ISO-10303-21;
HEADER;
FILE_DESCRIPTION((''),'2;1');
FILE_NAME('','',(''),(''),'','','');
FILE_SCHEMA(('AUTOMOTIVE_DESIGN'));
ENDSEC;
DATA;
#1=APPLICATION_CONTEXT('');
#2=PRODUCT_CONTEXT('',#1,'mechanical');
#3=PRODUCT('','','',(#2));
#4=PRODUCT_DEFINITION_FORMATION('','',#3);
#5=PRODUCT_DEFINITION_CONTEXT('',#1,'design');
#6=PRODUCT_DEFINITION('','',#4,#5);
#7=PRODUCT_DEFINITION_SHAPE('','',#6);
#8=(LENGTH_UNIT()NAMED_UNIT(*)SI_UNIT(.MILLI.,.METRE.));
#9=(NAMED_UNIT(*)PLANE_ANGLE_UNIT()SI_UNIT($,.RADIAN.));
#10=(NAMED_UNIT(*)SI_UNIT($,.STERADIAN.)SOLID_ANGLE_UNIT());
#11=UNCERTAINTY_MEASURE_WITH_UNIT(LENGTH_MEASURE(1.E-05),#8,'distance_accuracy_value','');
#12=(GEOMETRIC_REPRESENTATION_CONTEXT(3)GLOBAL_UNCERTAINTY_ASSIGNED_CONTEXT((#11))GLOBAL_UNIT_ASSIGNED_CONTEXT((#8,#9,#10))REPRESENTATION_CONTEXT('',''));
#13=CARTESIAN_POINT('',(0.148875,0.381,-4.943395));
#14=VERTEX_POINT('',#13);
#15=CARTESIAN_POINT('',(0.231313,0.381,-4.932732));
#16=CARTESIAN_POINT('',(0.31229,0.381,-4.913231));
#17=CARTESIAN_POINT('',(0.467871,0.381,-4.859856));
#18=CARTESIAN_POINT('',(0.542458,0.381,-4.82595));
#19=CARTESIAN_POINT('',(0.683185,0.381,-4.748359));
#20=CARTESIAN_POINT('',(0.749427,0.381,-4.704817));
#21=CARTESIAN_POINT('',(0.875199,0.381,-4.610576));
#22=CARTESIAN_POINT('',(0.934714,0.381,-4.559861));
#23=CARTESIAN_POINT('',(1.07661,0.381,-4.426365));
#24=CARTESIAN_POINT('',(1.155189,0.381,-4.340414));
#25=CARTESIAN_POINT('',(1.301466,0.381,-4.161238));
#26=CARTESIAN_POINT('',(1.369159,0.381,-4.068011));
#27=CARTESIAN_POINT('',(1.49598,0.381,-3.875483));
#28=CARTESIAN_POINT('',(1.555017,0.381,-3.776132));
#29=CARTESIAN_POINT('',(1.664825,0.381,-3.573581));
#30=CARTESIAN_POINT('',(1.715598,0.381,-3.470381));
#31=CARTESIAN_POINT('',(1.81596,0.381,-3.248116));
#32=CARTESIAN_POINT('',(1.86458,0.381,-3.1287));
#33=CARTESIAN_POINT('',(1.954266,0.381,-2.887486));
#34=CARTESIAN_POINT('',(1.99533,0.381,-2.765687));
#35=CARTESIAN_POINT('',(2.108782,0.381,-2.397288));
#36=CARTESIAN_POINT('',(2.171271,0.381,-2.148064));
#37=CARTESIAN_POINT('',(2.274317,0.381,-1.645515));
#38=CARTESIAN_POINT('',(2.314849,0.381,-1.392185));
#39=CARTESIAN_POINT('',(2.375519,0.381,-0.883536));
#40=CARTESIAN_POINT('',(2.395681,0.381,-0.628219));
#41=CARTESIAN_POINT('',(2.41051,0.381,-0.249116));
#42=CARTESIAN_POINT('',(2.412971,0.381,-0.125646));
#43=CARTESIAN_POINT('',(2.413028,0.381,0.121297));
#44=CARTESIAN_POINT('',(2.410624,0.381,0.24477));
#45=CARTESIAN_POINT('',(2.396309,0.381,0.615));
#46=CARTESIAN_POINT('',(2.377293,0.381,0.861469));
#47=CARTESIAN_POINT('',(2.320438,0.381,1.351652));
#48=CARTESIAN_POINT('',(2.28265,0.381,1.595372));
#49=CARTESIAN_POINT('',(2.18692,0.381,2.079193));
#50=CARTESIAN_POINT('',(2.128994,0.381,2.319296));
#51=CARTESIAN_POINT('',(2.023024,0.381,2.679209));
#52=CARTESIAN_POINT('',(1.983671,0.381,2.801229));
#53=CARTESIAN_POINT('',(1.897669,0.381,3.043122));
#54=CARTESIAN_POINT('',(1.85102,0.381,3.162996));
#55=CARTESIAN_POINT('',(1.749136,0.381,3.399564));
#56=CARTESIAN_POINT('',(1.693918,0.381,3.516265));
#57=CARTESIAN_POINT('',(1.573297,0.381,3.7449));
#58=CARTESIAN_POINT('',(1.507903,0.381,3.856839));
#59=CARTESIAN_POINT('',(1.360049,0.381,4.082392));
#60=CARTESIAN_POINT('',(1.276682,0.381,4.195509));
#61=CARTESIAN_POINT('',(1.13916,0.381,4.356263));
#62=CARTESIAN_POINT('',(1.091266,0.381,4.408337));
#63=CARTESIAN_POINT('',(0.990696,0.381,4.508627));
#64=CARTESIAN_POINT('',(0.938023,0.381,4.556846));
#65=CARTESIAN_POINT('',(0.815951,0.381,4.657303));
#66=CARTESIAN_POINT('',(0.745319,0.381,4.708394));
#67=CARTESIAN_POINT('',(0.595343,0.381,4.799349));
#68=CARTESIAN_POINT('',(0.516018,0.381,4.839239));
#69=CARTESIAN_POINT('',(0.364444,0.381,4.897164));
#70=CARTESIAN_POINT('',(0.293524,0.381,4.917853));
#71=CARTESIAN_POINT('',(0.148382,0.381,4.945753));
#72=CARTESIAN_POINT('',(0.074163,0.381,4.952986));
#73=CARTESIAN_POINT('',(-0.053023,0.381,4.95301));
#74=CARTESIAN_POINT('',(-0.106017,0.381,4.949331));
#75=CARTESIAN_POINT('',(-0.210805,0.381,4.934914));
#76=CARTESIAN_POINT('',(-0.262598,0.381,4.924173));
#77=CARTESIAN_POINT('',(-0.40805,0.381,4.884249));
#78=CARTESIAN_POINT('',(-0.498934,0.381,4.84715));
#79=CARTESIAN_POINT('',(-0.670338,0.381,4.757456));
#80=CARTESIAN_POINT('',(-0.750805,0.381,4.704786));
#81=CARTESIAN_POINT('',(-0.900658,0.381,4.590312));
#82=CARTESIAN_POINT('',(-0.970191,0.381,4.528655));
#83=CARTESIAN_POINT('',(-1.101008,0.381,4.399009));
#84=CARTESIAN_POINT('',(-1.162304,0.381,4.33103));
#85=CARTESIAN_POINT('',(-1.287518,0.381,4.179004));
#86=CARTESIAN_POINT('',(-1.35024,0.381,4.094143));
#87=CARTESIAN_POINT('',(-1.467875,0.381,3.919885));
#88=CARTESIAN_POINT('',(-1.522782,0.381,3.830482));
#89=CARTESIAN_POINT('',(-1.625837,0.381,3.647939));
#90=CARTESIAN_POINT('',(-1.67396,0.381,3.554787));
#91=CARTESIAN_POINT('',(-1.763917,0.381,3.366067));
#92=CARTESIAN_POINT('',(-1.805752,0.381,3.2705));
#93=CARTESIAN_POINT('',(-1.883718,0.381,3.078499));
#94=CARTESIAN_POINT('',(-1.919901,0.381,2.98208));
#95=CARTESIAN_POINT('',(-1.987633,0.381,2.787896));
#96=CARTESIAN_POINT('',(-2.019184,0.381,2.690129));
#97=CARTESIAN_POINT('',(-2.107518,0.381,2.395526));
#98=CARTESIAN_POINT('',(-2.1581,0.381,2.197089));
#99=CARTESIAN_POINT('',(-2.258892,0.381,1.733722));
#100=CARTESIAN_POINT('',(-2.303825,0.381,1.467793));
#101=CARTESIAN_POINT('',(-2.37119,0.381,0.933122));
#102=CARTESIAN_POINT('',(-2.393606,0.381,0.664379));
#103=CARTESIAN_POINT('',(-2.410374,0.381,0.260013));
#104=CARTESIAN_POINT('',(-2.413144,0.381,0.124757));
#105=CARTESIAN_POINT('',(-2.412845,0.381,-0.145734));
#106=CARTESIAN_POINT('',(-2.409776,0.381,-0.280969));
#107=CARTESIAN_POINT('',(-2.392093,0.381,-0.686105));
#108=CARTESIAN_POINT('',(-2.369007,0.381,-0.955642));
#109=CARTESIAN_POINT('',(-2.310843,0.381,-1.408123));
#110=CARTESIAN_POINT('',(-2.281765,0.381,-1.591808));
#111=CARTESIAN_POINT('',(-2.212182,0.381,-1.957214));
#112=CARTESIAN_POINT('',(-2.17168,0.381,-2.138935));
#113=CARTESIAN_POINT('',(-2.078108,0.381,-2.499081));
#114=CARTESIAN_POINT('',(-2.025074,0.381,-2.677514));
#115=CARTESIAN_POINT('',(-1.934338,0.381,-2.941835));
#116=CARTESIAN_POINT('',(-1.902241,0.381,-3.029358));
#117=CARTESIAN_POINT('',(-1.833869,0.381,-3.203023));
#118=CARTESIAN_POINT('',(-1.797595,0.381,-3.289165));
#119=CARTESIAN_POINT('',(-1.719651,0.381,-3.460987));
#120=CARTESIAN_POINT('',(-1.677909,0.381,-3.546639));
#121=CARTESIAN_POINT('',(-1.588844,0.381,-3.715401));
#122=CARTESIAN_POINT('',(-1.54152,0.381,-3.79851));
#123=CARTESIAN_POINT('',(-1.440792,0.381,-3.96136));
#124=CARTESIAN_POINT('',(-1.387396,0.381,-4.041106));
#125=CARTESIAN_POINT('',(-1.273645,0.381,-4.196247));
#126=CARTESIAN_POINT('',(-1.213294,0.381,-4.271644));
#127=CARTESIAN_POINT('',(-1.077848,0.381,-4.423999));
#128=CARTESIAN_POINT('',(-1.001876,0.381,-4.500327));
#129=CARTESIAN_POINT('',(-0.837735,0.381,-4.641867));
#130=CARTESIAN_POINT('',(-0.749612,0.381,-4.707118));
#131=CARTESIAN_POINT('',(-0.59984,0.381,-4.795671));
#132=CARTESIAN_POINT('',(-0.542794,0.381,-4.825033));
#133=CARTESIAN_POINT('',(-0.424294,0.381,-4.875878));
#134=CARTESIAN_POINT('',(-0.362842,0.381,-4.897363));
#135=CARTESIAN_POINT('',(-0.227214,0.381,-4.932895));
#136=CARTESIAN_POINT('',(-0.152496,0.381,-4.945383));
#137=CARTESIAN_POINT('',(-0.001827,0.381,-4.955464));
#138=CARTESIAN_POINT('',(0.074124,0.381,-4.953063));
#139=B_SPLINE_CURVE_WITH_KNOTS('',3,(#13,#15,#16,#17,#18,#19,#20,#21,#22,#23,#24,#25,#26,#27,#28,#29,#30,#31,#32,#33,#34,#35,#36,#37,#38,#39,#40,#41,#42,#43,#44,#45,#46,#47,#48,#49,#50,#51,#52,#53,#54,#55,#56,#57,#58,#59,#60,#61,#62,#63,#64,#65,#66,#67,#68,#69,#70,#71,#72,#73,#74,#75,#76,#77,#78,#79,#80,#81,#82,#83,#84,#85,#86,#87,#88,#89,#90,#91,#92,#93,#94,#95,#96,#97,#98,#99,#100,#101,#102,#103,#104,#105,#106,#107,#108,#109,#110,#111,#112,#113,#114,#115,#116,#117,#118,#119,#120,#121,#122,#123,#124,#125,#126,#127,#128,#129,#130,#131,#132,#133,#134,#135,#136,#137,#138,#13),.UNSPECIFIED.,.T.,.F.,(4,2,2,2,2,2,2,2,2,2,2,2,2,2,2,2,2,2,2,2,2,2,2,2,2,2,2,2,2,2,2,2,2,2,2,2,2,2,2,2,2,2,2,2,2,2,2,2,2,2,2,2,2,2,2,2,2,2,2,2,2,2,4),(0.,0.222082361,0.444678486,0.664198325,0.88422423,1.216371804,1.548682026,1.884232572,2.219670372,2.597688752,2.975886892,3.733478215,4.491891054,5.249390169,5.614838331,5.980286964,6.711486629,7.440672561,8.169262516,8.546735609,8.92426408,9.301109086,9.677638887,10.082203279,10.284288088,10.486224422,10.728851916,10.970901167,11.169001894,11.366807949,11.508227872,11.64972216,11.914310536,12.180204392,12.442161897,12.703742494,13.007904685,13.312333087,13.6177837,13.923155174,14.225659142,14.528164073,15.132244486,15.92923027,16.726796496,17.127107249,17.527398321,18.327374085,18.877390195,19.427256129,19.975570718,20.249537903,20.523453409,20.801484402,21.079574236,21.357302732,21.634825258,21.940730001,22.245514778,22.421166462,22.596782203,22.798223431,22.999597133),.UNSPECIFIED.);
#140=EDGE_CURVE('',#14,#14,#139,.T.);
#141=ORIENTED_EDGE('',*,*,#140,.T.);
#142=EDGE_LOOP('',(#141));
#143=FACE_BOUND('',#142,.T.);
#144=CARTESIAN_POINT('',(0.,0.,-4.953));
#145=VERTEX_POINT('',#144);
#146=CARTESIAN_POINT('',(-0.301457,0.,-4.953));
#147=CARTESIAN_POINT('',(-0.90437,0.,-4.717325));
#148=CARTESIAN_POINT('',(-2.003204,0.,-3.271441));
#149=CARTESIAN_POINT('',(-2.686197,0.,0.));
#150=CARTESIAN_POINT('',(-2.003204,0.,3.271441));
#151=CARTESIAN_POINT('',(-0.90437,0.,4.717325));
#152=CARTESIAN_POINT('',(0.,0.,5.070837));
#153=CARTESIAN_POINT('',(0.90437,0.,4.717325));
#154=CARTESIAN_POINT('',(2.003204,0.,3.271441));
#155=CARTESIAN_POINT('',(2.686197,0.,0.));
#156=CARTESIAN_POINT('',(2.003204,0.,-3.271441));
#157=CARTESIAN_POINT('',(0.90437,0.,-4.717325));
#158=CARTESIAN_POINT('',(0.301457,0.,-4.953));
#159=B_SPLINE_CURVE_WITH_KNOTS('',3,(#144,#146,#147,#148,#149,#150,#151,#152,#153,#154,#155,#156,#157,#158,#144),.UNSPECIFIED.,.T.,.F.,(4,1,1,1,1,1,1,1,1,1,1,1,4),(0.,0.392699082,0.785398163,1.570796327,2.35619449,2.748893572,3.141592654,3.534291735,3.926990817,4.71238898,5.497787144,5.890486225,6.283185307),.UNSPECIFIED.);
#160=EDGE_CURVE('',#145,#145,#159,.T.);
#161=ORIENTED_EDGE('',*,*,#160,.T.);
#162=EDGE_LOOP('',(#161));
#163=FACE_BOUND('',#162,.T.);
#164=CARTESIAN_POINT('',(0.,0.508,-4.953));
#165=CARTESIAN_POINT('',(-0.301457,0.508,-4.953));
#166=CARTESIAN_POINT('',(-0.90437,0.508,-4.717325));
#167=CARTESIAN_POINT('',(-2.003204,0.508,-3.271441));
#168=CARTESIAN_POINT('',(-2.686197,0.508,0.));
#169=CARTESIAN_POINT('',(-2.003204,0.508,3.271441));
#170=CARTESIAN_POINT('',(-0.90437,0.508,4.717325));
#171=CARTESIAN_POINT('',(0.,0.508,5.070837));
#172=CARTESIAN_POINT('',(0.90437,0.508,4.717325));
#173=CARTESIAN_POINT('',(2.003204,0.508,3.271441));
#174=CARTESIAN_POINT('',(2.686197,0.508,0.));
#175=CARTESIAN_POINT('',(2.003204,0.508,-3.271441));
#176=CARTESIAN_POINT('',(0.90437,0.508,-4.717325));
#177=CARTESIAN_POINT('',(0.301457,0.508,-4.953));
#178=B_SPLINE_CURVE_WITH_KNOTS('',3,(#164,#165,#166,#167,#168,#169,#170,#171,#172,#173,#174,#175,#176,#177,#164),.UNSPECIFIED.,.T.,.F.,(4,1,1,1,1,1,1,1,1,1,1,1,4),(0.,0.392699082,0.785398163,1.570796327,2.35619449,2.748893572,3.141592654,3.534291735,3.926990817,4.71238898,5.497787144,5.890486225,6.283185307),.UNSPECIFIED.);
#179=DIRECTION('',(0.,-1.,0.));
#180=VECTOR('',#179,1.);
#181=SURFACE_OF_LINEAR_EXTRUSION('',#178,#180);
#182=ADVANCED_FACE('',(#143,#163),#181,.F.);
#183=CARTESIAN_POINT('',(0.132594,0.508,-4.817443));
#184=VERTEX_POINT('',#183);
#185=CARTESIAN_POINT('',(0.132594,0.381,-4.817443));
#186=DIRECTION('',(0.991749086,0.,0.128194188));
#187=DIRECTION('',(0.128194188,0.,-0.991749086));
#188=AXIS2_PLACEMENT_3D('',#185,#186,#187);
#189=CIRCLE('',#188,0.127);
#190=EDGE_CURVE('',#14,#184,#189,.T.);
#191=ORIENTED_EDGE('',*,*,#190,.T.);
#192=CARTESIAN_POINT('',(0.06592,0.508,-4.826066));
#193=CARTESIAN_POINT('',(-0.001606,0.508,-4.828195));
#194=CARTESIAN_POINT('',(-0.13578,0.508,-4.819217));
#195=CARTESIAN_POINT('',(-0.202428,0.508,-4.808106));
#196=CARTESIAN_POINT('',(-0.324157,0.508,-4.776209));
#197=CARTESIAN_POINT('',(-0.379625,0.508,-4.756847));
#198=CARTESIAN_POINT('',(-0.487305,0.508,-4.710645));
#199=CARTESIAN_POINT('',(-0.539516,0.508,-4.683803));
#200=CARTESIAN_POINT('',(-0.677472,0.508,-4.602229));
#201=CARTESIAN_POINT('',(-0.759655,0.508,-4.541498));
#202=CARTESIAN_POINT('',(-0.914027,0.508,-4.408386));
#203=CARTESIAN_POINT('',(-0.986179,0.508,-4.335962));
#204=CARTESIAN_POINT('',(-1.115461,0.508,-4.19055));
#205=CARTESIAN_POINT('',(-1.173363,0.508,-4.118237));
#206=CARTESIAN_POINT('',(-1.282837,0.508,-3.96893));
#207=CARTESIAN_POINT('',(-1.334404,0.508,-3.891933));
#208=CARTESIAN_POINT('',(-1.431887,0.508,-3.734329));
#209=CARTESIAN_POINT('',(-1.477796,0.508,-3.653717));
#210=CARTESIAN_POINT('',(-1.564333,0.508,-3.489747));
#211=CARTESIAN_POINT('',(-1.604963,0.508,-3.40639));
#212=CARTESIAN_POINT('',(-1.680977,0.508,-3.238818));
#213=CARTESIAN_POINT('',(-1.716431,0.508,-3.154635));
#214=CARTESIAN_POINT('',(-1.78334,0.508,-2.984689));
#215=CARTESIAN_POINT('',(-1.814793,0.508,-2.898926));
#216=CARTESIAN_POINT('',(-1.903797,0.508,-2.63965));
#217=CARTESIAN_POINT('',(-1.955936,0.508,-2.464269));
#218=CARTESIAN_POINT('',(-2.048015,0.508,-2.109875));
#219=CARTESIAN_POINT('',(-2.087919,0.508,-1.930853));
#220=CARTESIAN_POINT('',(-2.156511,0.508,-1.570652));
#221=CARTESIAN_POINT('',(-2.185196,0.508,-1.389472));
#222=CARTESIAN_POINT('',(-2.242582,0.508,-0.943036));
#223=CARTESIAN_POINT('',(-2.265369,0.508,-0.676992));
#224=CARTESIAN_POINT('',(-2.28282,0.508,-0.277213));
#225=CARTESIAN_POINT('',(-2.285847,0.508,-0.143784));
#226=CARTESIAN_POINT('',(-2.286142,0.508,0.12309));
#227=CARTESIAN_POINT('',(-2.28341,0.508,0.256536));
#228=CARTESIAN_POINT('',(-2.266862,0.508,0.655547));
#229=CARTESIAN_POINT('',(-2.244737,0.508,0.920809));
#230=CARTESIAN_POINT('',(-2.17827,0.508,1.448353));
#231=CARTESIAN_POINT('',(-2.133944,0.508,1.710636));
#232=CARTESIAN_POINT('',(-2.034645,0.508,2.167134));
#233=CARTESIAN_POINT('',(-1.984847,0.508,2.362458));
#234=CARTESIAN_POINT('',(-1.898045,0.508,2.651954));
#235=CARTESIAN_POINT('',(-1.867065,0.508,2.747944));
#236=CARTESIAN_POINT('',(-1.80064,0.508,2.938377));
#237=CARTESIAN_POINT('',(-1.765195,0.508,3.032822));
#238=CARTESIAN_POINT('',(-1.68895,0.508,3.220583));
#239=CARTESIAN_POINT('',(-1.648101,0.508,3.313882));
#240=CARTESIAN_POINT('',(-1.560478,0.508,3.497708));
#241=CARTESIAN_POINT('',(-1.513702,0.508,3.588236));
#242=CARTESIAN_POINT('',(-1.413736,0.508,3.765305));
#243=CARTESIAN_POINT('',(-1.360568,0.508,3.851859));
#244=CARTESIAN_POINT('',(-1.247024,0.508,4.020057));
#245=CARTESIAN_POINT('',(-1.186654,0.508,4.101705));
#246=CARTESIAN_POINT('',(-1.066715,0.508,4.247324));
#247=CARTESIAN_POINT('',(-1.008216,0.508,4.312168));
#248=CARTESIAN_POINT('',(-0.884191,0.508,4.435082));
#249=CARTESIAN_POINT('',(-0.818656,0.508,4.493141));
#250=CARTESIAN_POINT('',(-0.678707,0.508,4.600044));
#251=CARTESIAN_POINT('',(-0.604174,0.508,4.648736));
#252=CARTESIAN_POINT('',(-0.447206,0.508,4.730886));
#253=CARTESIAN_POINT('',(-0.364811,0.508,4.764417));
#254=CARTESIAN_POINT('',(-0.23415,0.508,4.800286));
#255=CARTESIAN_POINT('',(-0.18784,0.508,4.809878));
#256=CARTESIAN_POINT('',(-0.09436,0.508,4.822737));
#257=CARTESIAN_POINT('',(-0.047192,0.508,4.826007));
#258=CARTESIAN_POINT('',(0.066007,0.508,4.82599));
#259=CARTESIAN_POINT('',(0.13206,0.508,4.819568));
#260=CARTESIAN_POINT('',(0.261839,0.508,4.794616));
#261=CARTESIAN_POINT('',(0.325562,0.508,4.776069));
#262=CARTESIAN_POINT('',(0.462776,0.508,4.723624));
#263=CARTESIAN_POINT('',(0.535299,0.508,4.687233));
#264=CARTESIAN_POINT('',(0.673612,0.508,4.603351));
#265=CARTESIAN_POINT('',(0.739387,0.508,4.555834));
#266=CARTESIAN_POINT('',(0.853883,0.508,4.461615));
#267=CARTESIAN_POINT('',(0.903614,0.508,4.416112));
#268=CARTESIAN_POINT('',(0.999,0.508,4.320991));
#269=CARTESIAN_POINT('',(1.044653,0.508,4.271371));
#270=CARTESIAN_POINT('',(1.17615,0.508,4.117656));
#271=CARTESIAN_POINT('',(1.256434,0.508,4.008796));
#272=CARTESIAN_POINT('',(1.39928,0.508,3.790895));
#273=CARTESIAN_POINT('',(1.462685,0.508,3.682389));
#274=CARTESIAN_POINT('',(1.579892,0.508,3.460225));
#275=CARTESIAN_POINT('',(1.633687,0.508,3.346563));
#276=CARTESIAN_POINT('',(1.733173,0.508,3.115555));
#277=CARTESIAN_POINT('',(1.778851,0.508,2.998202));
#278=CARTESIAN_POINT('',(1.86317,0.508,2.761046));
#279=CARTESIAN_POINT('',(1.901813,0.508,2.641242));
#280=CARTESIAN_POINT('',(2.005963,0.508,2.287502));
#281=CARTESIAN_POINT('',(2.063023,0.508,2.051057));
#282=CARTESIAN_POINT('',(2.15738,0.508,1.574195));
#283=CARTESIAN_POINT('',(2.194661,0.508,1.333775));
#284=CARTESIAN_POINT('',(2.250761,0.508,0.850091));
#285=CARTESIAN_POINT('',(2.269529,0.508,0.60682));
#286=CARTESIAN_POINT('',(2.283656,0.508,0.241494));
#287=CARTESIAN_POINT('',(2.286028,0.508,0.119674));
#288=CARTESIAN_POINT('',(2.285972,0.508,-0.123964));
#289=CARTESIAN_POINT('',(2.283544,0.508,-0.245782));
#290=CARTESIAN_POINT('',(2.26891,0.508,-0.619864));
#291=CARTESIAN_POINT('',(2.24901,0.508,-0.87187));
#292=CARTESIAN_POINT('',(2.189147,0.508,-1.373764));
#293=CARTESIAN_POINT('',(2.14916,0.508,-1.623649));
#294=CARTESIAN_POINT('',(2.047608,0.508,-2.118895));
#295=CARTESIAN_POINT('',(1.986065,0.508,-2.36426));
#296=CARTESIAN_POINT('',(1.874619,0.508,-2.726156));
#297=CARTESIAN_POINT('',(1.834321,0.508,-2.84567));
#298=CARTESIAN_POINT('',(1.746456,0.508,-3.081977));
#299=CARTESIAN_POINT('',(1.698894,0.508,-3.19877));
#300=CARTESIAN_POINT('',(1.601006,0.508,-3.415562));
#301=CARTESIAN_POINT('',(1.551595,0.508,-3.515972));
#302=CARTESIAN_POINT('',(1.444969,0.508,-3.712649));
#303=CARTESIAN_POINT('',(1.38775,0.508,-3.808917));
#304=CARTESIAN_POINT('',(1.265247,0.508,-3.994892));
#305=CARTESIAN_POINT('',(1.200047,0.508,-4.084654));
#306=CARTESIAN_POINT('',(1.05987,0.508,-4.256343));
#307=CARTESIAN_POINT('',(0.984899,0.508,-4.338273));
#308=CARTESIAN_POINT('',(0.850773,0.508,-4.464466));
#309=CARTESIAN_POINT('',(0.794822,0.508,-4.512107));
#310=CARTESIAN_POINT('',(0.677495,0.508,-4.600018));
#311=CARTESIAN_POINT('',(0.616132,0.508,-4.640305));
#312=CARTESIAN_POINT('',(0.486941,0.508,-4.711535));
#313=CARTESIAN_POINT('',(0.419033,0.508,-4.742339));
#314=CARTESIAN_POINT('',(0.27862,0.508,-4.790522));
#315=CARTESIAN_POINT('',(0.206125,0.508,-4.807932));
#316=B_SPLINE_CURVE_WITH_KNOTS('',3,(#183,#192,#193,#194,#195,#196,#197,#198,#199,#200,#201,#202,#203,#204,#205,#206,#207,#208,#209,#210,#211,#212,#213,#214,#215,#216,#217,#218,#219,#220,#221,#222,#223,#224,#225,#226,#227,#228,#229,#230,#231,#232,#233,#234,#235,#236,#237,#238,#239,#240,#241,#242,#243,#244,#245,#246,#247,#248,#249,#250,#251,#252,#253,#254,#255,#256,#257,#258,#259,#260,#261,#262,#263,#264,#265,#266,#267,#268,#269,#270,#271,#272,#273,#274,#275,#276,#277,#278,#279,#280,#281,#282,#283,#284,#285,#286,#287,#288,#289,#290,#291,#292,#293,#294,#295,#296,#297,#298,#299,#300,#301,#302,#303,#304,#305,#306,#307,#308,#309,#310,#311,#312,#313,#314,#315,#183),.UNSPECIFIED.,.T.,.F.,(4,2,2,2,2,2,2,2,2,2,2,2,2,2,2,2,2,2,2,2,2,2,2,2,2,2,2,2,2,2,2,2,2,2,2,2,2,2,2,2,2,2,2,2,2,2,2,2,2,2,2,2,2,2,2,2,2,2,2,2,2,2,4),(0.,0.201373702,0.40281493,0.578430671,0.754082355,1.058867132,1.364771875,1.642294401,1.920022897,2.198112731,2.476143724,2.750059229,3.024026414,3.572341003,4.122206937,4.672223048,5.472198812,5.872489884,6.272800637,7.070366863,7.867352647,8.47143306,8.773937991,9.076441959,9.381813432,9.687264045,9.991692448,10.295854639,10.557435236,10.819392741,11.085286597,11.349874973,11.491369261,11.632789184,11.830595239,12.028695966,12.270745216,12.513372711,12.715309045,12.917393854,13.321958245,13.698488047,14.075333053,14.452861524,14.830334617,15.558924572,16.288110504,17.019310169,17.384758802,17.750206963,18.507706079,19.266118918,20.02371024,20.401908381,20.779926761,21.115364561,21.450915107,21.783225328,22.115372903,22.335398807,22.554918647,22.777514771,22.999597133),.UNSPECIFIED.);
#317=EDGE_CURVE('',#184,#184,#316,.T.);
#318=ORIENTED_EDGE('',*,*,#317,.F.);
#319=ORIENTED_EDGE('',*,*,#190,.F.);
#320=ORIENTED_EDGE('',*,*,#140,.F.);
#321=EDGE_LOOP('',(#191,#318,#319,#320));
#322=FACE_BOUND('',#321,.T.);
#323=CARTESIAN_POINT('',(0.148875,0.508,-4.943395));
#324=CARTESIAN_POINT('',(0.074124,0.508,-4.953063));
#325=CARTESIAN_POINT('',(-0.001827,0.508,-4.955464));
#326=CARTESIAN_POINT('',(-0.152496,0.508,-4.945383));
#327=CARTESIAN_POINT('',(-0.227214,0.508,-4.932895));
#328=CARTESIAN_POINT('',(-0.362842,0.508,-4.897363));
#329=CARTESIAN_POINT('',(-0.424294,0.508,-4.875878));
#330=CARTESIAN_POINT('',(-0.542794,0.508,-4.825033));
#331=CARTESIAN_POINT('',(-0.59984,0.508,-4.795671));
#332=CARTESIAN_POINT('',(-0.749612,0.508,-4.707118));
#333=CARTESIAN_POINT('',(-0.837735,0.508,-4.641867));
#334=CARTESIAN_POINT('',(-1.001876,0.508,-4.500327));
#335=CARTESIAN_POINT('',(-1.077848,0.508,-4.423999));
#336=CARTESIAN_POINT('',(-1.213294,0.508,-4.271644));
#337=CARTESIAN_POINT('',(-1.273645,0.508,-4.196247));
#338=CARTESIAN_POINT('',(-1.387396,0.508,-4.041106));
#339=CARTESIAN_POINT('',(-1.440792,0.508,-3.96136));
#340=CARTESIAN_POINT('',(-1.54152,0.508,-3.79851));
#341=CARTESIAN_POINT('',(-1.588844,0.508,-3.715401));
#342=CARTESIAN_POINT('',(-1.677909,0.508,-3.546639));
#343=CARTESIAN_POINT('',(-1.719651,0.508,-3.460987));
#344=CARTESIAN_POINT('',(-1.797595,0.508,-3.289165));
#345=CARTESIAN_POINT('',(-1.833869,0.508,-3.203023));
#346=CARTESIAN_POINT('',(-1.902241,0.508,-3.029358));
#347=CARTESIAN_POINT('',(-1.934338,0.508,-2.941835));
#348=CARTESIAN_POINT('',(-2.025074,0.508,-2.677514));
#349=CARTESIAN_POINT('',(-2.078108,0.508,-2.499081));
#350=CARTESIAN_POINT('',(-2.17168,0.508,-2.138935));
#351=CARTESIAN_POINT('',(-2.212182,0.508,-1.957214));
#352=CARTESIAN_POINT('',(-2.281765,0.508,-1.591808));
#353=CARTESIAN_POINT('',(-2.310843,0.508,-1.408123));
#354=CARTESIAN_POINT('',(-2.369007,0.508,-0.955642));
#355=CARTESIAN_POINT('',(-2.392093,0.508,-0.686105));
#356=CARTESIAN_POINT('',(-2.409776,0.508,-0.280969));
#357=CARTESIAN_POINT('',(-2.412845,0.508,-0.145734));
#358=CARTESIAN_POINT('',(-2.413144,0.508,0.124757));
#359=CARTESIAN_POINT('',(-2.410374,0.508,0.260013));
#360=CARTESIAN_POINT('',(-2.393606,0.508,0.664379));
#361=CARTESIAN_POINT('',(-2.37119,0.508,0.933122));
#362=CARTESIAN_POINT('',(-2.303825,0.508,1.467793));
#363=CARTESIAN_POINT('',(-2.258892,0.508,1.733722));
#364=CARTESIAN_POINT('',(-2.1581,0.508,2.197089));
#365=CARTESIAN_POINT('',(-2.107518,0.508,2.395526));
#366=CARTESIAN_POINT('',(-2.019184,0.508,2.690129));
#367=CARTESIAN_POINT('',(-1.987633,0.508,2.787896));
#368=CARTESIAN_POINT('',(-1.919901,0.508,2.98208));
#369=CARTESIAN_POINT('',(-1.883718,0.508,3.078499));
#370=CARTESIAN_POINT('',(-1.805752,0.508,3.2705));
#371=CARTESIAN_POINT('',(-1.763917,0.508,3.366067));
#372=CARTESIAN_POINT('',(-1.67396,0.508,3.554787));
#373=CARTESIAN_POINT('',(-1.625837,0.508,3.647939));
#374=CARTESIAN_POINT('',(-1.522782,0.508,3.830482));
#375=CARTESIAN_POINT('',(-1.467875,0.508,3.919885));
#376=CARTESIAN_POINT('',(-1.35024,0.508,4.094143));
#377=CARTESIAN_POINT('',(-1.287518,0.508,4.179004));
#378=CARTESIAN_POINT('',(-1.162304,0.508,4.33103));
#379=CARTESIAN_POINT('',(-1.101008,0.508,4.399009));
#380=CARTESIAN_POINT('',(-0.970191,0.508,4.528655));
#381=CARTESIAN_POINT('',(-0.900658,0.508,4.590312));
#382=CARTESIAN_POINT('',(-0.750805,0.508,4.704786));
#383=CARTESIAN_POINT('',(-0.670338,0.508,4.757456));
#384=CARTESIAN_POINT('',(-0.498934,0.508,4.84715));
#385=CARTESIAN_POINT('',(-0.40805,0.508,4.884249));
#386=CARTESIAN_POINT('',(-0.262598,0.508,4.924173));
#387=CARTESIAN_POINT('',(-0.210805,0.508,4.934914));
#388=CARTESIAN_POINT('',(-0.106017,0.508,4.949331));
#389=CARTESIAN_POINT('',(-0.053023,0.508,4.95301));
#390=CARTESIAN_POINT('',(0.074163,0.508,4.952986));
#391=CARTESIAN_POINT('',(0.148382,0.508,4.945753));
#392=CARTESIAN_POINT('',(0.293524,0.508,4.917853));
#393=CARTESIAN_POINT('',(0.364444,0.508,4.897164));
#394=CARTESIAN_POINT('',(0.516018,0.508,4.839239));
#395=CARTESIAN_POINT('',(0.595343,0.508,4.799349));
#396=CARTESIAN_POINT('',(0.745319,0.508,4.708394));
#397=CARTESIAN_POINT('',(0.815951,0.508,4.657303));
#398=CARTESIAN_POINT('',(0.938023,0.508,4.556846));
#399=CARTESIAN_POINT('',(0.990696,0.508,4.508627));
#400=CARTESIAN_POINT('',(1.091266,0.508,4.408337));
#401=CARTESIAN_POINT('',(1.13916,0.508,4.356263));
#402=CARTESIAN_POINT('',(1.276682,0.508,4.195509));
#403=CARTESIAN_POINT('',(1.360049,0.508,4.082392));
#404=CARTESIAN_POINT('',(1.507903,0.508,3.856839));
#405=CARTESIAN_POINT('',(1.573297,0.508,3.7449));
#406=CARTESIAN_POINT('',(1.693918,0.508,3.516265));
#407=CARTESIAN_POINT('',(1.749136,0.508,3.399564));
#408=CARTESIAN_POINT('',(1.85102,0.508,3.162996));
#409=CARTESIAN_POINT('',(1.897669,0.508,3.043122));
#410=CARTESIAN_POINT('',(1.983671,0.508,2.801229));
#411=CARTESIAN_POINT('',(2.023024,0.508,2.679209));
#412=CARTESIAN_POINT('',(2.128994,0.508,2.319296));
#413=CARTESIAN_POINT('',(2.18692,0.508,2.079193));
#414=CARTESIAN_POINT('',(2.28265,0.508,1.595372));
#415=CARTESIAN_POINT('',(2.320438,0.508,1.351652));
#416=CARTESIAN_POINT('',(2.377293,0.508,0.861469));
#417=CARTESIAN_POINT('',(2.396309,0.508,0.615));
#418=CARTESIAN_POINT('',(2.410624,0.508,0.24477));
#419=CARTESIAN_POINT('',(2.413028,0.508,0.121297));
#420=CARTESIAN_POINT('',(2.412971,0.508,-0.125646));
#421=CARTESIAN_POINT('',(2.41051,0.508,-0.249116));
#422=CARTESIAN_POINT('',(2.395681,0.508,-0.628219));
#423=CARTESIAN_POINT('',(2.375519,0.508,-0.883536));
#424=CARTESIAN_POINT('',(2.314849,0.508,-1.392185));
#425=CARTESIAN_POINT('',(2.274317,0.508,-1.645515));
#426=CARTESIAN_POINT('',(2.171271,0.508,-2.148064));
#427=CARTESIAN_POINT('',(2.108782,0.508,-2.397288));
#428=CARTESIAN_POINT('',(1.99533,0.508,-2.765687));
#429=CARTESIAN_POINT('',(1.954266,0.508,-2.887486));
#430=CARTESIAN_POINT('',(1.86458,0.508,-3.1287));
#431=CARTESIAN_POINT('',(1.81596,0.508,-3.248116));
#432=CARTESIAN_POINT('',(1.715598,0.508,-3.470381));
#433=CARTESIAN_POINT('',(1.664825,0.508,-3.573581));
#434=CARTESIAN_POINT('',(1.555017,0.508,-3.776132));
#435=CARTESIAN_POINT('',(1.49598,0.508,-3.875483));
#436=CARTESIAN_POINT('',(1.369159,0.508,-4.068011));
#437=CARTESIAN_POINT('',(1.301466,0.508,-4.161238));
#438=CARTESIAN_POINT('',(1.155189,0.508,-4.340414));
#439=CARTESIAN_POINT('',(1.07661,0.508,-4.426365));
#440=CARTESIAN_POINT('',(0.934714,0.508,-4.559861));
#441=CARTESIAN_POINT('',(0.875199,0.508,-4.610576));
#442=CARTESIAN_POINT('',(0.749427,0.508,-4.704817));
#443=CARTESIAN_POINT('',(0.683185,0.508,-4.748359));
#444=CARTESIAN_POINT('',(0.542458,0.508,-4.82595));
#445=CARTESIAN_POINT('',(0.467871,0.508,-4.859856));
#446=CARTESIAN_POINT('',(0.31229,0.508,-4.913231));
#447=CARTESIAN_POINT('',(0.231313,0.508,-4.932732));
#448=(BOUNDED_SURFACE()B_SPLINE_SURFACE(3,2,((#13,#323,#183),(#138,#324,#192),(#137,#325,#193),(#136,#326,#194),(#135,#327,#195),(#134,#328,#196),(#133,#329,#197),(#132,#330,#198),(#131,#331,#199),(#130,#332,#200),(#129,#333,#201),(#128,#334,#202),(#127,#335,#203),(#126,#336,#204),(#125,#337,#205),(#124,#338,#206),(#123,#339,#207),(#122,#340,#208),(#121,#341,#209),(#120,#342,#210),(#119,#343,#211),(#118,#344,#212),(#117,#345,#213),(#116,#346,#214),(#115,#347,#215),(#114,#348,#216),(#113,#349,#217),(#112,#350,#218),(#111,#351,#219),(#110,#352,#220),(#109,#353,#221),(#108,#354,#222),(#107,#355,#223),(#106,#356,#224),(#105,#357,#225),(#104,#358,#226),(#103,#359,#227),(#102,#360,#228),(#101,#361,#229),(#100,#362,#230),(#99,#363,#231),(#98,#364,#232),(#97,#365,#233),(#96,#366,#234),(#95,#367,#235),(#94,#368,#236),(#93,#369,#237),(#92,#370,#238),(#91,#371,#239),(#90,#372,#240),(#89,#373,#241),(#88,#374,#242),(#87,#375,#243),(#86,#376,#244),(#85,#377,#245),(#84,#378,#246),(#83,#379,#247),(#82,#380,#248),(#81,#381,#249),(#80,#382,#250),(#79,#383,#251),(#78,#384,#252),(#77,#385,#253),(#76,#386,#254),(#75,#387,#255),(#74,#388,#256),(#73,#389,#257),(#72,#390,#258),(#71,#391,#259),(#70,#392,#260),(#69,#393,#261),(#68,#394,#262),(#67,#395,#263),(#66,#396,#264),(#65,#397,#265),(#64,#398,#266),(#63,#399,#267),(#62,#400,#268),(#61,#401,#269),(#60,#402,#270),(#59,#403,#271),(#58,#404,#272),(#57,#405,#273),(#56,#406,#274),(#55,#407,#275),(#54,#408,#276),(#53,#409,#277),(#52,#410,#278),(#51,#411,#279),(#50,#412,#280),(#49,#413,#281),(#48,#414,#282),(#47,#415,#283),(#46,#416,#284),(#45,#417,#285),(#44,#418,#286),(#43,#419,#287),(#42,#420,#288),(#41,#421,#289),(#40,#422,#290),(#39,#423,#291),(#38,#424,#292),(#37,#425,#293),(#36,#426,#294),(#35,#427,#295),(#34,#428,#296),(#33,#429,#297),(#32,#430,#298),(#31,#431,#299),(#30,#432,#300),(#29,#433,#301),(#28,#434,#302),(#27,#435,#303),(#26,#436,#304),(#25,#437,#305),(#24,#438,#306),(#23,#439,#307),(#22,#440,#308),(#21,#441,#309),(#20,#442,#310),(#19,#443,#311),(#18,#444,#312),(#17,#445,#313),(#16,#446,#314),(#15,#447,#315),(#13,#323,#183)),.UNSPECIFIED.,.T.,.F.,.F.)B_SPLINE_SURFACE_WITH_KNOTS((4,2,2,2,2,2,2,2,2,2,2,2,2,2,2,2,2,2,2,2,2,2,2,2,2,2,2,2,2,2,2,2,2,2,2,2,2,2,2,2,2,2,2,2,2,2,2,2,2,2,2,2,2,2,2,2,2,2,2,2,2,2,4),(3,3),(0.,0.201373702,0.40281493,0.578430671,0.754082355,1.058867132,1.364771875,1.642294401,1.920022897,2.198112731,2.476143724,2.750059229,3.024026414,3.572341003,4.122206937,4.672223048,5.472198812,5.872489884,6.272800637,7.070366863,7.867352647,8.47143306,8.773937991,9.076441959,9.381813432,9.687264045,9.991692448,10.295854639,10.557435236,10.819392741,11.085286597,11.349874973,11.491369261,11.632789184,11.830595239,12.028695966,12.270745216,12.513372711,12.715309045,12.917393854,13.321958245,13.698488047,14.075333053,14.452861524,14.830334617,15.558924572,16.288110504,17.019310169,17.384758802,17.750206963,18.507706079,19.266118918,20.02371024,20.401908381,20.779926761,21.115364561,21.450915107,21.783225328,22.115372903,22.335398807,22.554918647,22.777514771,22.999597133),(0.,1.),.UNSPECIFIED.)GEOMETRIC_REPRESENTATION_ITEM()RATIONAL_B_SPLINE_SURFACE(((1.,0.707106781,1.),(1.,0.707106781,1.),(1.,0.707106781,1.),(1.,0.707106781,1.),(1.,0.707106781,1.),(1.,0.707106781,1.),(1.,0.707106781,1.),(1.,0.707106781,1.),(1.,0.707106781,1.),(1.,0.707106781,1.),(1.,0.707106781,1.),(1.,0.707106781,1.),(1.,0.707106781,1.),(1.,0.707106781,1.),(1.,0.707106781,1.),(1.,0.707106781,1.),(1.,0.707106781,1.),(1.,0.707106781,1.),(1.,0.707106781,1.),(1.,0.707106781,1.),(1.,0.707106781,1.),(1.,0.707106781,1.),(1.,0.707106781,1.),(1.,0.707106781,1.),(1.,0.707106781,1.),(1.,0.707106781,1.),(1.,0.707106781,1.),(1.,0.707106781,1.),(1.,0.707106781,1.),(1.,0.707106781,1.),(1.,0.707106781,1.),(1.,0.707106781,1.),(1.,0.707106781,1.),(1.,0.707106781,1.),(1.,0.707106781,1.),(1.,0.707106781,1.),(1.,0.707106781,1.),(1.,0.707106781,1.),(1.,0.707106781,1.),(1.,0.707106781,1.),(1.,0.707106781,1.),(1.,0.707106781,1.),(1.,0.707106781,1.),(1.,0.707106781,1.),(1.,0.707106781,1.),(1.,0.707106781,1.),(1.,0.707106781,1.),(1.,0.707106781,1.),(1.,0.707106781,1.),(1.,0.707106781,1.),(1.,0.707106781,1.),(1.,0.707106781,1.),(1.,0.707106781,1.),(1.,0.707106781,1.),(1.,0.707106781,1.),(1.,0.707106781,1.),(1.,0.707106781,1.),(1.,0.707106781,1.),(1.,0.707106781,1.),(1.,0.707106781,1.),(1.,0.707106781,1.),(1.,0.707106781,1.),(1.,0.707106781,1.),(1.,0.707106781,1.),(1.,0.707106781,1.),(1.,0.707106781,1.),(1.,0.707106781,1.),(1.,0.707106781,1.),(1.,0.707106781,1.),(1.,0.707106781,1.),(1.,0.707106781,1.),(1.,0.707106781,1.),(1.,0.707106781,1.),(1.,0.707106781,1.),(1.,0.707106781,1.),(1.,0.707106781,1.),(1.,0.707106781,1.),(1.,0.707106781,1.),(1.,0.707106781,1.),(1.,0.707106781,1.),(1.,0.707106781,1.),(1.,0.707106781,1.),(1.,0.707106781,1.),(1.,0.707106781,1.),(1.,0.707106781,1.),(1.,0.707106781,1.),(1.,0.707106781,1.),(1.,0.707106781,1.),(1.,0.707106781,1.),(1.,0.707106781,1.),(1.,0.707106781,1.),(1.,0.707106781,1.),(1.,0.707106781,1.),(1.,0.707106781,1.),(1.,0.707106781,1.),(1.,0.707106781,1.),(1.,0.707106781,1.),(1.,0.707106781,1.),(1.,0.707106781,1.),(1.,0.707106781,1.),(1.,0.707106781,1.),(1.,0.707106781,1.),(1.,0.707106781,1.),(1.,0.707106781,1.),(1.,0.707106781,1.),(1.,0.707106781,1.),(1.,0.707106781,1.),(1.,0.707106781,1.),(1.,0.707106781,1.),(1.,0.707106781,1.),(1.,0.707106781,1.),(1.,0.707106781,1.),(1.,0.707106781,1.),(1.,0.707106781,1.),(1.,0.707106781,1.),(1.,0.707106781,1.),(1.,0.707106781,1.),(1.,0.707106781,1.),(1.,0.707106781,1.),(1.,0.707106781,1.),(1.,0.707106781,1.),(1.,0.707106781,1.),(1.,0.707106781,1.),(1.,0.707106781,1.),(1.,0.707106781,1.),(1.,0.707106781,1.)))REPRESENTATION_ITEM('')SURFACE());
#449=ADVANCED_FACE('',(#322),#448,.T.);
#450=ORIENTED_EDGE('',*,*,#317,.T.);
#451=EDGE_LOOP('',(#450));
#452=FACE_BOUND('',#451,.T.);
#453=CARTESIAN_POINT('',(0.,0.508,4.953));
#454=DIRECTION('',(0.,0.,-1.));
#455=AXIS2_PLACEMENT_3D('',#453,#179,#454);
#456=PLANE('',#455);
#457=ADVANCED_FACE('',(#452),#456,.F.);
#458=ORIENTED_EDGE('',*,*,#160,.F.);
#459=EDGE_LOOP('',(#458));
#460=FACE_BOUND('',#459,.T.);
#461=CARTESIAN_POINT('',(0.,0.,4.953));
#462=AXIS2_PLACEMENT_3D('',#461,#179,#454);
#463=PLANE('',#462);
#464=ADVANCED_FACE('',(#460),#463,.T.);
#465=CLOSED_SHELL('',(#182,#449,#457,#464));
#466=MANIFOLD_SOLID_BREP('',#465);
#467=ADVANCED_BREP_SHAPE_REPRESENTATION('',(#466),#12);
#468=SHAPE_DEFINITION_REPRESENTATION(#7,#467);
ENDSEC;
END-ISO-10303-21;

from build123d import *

# Parameters (mm, degrees)
BOSS_EXTRUDE1_DEPTH = 0.508
FILLET1_R           = 0.127


# Read off the part's stored shape, not the designer's step: Boss-Extrude1
with BuildPart() as part:
    # Boss-Extrude1 outline → Boss-Extrude1 (new body)
    with BuildSketch(Plane(origin=(0, 0, 0), x_dir=(1, 0, 0), z_dir=(0, 1, 0))):
        with BuildLine():
            add(Edge.make_bspline(
                [(0, 4.953), (-0.30145671, 4.953), (-0.90437013, 4.717325166), (-2.00320407, 3.271441), (-2.686197287, 0), (-2.00320407, -3.271441), (-0.90437013, -4.717325166), (0, -5.070837417), (0.90437013, -4.717325166), (2.00320407, -3.271441), (2.686197287, 0), (2.00320407, 3.271441), (0.90437013, 4.717325166), (0.30145671, 4.953), (0, 4.953)],
                knots=[0, 0, 0, 0, 0.392699082, 0.785398163, 1.570796327, 2.35619449, 2.748893572, 3.141592654, 3.534291735, 3.926990817, 4.71238898, 5.497787144, 5.890486225, 6.283185307, 6.283185307, 6.283185307, 6.283185307], degree=3))
        make_face()
    extrude(amount=BOSS_EXTRUDE1_DEPTH)

    # Fillet1
    fillet1_edges = [part.edges().sort_by_distance(p)[0] for p in [
        (0, 0.508, 4.953),
    ]]
    fillet(fillet1_edges, radius=FILLET1_R)


solid = part.part
